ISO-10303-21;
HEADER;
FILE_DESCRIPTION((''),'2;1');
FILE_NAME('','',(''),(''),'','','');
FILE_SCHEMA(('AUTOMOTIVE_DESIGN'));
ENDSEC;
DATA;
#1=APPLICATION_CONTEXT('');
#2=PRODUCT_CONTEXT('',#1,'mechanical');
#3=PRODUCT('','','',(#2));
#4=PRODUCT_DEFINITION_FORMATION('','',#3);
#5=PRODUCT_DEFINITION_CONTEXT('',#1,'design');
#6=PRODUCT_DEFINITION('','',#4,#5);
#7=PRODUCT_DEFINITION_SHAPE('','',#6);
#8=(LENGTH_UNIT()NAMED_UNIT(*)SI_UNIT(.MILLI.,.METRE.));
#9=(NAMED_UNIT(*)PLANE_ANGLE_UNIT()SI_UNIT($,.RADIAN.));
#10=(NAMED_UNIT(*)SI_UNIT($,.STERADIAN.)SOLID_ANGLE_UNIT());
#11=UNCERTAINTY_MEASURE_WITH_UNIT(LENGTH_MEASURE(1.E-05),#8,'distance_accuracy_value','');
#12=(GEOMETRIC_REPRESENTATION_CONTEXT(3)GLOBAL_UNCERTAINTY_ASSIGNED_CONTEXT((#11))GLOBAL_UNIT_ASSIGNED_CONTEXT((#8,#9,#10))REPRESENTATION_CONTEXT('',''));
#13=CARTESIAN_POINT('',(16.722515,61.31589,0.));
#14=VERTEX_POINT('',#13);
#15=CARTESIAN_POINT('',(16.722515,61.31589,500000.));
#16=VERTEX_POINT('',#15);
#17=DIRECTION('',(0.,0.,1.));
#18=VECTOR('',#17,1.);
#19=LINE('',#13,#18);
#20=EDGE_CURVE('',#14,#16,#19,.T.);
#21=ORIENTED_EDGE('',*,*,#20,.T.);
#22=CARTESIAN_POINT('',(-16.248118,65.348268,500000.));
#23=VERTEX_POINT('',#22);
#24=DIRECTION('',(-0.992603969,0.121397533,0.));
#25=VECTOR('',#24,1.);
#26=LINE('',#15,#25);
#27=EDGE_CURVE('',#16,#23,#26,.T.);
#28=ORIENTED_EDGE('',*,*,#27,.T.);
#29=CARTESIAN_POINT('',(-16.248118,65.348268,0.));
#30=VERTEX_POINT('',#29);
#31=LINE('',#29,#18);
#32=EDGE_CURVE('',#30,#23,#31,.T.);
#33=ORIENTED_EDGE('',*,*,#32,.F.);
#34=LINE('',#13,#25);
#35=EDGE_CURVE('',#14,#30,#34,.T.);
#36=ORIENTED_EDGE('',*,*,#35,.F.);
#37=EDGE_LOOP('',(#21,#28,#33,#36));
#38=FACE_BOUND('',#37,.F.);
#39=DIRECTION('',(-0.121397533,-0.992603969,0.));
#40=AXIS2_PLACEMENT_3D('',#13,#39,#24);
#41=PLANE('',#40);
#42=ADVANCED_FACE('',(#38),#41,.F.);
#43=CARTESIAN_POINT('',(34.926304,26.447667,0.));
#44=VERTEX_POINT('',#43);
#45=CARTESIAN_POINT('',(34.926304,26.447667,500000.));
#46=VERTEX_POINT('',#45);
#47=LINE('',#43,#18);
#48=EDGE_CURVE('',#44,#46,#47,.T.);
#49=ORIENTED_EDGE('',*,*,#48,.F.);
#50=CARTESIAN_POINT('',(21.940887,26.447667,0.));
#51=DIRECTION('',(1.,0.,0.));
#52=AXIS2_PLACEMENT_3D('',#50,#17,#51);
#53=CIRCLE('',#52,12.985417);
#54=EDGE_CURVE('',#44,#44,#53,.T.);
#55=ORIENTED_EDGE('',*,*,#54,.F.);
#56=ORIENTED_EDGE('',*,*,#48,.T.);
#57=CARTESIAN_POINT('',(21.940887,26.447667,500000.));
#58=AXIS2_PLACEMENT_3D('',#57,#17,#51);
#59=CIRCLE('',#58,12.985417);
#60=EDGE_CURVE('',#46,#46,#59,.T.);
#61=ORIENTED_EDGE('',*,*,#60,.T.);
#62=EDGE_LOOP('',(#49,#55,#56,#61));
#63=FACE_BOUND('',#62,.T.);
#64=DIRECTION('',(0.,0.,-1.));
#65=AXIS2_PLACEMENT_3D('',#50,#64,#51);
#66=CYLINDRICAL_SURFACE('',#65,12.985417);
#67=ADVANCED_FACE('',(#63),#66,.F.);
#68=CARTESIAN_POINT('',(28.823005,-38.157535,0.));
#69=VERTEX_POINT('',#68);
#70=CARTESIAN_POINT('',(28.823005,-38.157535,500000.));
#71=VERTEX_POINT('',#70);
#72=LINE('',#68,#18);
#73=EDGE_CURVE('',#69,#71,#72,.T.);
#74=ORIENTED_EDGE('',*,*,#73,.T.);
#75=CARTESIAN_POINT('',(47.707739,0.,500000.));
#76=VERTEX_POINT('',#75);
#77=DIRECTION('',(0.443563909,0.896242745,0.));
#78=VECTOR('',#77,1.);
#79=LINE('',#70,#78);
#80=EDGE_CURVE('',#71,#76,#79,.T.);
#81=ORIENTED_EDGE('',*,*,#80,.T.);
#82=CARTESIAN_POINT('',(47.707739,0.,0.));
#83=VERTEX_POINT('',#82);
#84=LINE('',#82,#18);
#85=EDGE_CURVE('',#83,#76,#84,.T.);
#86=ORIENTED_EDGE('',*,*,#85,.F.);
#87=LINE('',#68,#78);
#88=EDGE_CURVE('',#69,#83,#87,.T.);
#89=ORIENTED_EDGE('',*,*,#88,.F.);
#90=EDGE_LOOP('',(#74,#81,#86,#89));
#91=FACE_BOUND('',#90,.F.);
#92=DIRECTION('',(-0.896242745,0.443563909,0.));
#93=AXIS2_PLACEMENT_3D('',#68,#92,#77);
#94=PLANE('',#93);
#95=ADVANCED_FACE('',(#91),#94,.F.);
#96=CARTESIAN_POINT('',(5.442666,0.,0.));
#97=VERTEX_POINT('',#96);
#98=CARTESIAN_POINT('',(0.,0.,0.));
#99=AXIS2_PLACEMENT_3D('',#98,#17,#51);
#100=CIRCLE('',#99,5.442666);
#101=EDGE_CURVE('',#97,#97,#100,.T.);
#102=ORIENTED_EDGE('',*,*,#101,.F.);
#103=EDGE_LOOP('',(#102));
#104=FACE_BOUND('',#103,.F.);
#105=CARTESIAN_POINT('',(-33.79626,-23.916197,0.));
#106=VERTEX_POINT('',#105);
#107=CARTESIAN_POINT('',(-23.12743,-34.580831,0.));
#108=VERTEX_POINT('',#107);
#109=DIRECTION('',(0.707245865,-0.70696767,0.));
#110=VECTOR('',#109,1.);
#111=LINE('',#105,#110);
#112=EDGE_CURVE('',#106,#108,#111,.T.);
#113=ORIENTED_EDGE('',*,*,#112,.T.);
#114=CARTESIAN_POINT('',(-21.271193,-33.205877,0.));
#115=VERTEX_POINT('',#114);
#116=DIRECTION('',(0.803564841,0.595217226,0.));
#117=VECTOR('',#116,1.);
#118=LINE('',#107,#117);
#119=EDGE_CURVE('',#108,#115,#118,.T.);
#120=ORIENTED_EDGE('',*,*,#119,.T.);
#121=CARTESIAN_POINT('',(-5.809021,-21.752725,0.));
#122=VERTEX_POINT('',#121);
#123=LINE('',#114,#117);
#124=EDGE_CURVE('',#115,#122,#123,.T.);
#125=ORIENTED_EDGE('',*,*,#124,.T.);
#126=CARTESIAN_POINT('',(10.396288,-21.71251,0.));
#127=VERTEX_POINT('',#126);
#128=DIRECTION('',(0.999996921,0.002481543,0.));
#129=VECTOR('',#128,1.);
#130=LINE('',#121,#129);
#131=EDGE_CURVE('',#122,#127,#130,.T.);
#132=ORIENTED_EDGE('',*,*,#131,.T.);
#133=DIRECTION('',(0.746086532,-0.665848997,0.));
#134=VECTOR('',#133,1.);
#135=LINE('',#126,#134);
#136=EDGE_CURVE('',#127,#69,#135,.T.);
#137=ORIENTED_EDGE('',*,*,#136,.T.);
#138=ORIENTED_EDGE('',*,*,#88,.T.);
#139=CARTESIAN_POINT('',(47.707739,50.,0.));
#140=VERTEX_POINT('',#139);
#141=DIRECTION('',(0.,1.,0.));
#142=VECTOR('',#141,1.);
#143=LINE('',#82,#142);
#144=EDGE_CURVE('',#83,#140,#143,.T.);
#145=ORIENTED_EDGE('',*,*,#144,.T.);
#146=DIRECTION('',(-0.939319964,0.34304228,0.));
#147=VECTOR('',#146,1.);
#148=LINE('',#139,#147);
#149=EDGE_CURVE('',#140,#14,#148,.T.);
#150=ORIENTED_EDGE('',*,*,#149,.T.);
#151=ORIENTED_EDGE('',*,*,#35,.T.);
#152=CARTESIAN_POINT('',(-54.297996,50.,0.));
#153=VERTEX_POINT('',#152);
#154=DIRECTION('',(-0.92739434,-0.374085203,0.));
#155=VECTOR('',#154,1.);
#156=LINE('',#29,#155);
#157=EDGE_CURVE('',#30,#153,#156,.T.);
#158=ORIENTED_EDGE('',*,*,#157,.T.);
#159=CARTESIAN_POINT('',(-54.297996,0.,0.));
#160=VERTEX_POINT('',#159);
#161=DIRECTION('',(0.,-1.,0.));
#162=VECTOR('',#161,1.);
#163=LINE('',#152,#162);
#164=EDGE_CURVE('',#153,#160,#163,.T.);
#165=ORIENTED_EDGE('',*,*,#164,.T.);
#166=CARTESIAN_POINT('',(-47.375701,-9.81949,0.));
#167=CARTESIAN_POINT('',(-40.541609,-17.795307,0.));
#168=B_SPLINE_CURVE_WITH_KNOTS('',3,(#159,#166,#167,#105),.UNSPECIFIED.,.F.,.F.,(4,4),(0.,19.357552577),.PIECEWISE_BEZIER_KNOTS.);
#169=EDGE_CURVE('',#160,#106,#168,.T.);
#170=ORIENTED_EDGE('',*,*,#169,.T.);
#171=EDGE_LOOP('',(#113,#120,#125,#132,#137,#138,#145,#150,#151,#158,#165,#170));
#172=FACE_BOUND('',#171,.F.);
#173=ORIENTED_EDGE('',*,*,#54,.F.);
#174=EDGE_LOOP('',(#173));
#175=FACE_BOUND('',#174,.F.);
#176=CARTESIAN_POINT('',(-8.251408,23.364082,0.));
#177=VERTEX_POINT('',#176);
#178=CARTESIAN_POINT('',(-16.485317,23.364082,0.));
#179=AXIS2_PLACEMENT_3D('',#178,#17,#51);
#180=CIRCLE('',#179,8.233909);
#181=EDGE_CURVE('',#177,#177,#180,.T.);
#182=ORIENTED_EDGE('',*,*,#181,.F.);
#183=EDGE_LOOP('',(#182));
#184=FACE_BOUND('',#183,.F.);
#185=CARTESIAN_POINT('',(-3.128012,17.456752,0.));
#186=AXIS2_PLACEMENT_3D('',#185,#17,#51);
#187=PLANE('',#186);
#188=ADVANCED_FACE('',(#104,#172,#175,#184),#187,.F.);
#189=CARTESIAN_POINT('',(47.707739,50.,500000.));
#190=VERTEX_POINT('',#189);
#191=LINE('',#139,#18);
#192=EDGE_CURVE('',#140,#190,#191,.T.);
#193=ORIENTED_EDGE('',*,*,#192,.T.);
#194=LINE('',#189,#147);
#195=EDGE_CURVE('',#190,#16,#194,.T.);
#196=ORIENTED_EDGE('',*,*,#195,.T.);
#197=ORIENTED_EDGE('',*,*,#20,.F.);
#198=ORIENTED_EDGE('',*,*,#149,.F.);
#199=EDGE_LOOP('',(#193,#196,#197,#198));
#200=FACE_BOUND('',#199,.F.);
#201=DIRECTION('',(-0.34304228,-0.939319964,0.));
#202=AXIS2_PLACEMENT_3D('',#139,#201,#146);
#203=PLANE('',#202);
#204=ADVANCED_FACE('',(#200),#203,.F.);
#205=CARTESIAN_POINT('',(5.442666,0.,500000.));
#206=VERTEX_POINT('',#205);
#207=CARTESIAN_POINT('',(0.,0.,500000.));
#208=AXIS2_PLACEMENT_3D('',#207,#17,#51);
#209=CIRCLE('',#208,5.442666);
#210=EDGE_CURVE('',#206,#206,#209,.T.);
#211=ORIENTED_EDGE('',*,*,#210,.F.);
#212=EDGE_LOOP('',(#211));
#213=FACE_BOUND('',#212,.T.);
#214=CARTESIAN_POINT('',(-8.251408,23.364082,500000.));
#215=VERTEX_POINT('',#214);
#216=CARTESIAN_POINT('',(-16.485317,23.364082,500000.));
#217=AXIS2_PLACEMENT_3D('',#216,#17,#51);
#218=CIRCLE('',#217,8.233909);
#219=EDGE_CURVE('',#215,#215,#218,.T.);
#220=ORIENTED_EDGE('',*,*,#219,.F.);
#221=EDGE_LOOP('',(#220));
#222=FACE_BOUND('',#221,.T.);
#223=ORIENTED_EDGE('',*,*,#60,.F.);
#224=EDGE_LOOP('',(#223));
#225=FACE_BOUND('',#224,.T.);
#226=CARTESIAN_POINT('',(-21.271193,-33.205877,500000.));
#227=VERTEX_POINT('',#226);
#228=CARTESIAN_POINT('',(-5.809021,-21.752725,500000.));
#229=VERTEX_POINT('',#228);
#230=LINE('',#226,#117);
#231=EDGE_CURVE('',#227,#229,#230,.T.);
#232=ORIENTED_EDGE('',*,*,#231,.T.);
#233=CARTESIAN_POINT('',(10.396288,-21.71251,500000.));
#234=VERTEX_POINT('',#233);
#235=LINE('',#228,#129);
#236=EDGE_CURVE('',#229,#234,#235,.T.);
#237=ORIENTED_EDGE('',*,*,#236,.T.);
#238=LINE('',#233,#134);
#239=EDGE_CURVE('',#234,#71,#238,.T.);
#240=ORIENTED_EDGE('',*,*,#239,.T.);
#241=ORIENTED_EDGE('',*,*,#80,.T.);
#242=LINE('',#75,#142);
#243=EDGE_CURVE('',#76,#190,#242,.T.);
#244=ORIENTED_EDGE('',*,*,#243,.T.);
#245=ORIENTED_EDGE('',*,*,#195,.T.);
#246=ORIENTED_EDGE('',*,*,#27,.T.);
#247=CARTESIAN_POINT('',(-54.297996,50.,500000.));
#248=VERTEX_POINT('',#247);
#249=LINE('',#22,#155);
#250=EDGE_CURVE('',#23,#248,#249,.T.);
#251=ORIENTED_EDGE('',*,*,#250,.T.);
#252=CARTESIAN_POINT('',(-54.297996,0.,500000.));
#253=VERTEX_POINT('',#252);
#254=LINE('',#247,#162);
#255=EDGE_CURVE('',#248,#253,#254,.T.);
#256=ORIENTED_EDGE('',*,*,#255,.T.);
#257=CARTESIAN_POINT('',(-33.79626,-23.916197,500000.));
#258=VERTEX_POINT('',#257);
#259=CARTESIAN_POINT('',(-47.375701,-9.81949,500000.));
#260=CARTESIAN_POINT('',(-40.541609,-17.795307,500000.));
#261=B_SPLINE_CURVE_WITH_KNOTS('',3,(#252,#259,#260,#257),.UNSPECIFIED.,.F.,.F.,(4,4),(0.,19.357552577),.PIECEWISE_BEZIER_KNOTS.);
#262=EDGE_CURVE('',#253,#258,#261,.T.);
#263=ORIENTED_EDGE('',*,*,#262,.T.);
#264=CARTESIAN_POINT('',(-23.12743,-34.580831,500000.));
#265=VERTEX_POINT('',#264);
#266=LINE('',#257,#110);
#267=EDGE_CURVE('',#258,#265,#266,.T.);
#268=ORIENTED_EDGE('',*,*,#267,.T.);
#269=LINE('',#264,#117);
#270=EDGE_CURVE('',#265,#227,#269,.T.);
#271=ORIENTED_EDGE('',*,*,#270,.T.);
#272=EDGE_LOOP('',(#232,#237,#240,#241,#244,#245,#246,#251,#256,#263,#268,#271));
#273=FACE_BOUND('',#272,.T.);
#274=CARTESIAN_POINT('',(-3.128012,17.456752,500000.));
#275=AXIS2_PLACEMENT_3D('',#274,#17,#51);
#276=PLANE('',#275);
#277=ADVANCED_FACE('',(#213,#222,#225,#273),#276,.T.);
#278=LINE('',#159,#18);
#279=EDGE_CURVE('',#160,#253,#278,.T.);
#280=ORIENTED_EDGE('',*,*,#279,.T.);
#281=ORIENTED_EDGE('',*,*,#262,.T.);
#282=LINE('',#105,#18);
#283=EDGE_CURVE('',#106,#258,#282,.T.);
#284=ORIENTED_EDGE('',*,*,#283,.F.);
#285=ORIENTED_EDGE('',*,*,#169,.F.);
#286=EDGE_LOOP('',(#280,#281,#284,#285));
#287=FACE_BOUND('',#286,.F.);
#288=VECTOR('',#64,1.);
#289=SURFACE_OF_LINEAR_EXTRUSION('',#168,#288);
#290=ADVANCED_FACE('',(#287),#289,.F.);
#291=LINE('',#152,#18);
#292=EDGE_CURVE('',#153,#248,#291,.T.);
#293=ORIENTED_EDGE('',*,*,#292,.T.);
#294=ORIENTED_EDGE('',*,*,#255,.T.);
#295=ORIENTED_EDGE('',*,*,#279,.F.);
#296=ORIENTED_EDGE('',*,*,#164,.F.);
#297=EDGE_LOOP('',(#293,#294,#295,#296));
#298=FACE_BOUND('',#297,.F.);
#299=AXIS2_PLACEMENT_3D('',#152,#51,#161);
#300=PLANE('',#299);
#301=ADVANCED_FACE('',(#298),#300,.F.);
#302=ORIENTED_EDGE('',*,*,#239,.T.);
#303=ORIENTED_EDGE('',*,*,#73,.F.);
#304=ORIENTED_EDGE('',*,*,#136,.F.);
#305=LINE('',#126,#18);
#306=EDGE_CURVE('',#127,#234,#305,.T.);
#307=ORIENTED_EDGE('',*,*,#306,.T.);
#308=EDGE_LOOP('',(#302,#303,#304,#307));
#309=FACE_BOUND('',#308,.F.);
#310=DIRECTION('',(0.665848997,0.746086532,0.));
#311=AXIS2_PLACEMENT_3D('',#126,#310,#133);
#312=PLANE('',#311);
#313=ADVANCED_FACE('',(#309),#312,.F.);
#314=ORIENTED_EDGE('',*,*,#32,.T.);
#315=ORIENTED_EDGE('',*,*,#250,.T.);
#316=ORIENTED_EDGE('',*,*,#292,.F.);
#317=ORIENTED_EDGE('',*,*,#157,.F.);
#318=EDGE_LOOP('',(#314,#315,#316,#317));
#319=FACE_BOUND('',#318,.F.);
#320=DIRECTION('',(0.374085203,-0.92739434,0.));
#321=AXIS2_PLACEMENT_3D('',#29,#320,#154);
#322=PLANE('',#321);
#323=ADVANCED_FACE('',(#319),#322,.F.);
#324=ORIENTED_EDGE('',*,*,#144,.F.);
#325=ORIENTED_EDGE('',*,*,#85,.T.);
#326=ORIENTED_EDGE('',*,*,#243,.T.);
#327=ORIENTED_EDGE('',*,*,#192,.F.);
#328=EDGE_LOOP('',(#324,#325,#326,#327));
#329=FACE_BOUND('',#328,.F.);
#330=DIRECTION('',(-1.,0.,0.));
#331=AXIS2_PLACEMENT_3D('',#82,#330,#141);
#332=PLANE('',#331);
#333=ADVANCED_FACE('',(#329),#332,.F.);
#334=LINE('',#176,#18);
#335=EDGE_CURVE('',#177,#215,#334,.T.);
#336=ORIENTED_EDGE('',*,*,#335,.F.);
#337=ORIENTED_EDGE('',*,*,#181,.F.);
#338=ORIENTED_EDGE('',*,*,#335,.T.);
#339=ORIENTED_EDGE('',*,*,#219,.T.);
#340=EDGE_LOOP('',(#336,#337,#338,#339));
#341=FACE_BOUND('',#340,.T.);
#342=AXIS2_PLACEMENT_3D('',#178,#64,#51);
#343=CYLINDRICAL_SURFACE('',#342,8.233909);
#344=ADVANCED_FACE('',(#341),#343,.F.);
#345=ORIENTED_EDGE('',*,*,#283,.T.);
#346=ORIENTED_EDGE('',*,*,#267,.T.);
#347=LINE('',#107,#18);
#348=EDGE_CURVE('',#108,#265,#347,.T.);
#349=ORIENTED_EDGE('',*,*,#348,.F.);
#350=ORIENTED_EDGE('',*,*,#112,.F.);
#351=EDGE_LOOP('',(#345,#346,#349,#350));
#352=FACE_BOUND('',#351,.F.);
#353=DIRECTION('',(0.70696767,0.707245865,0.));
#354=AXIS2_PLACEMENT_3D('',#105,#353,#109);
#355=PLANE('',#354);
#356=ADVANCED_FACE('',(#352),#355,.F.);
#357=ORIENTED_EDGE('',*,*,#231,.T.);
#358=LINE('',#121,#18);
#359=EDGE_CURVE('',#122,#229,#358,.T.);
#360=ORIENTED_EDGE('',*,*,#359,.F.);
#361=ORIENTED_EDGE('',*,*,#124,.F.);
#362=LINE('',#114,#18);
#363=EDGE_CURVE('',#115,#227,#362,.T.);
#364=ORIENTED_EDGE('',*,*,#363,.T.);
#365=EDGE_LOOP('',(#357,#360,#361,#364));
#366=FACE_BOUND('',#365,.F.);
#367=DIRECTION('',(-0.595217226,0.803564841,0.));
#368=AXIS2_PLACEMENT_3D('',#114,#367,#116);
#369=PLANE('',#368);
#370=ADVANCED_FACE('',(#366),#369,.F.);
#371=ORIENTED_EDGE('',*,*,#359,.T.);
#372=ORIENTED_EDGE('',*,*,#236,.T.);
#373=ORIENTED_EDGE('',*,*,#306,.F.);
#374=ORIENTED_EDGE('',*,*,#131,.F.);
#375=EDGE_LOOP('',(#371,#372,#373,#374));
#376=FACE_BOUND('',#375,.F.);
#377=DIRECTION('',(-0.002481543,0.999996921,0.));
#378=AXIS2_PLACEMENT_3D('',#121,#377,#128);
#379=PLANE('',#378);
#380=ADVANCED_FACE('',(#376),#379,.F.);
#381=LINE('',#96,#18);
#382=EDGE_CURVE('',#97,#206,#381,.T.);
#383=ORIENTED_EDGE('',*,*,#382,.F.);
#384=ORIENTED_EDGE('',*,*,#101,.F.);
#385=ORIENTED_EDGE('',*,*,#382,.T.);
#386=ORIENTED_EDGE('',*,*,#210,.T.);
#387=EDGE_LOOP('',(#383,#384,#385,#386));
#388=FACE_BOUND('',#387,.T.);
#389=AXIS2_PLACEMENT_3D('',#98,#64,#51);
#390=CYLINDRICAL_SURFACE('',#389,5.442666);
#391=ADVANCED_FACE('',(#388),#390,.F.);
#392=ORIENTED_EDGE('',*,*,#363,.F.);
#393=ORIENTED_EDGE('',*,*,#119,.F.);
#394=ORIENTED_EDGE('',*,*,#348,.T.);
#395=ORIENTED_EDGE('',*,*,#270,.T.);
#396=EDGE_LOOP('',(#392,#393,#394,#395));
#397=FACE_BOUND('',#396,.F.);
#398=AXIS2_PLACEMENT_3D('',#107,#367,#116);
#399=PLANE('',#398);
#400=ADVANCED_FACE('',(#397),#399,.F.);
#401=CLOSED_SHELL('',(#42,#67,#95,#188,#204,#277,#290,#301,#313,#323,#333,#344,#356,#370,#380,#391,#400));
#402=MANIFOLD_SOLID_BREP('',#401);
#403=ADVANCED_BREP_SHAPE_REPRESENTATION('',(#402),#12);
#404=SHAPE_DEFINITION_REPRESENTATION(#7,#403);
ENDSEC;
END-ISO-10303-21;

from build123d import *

# Parameters (mm, degrees)
F0_R     = 5.4426660598
F0_R_2   = 8.2339087149
F0_R_3   = 12.9854168842
F1_DEPTH = 500000


with BuildPart() as f1:
    # F0 (on Top) → F1 (new body)
    with BuildSketch(Plane.XY):
        with BuildLine():
            Line((-54.2979964743, 50), (-54.2979964743, 0))
            add(Edge.make_bspline(
                [(-54.2979964743, 0), (-47.3757010279, -9.8194904065), (-40.5416094951, -17.7953065043), (-33.7962601525, -23.9161970139)],
                knots=[0, 0, 0, 0, 19.3575525772, 19.3575525772, 19.3575525772, 19.3575525772], degree=3))
            add(Edge.make_bspline(
                [(-33.7962601525, -23.9161970139), (-29.5866312809, -27.7361144267), (-25.4115652053, -30.833586128), (-21.2711927607, -33.2058773528)],
                knots=[19.3575525772, 19.3575525772, 19.3575525772, 19.3575525772, 31.4381888904, 31.4381888904, 31.4381888904, 31.4381888904], degree=3))
            Line((-21.2711927607, -33.2058773528), (-5.8090212984, -21.7527246851))
            Line((-5.8090212984, -21.7527246851), (10.3962879922, -21.7125103847))
            Line((10.3962879922, -21.7125103847), (21.0729385004, -31.2409453996))
            add(Edge.make_bspline(
                [(21.0729385004, -31.2409453996), (30.142348872, -24.8226587171), (39.0211662161, -14.4205185512), (47.7077388138, 0)],
                knots=[73.8763251974, 73.8763251974, 73.8763251974, 73.8763251974, 102.0057352881, 102.0057352881, 102.0057352881, 102.0057352881], degree=3))
            Line((47.7077388138, 0), (47.7077388138, 50))
            Line((47.7077388138, 50), (16.7225152254, 61.3158904016))
            Line((16.7225152254, 61.3158904016), (-16.2481181324, 65.3482675552))
            Line((-16.2481181324, 65.3482675552), (-54.2979964743, 50))
        make_face()
        Circle(F0_R, mode=Mode.SUBTRACT)
        with Locations((-16.4853166789, 23.3640819788)):
            Circle(F0_R_2, mode=Mode.SUBTRACT)
        with Locations((21.9408869743, 26.447666809)):
            Circle(F0_R_3, mode=Mode.SUBTRACT)
        with BuildLine():
            add(Edge.make_bspline(
                [(-33.7962601525, -23.9161970139), (-29.5866312809, -27.7361144267), (-25.4115652053, -30.833586128), (-21.2711927607, -33.2058773528)],
                knots=[19.3575525772, 19.3575525772, 19.3575525772, 19.3575525772, 31.4381888904, 31.4381888904, 31.4381888904, 31.4381888904], degree=3))
            Line((-33.7962601525, -23.9161970139), (-23.1274297827, -34.580830803))
            Line((-23.1274297827, -34.580830803), (-21.2711927607, -33.2058773528))
        make_face()
        with BuildLine():
            add(Edge.make_bspline(
                [(21.0729385004, -31.2409453996), (30.142348872, -24.8226587171), (39.0211662161, -14.4205185512), (47.7077388138, 0)],
                knots=[73.8763251974, 73.8763251974, 73.8763251974, 73.8763251974, 102.0057352881, 102.0057352881, 102.0057352881, 102.0057352881], degree=3))
            Line((21.0729385004, -31.2409453996), (28.8230053729, -38.1575348767))
            Line((28.8230053729, -38.1575348767), (47.7077388138, 0))
        make_face()
    extrude(amount=F1_DEPTH)


solid = f1.part
